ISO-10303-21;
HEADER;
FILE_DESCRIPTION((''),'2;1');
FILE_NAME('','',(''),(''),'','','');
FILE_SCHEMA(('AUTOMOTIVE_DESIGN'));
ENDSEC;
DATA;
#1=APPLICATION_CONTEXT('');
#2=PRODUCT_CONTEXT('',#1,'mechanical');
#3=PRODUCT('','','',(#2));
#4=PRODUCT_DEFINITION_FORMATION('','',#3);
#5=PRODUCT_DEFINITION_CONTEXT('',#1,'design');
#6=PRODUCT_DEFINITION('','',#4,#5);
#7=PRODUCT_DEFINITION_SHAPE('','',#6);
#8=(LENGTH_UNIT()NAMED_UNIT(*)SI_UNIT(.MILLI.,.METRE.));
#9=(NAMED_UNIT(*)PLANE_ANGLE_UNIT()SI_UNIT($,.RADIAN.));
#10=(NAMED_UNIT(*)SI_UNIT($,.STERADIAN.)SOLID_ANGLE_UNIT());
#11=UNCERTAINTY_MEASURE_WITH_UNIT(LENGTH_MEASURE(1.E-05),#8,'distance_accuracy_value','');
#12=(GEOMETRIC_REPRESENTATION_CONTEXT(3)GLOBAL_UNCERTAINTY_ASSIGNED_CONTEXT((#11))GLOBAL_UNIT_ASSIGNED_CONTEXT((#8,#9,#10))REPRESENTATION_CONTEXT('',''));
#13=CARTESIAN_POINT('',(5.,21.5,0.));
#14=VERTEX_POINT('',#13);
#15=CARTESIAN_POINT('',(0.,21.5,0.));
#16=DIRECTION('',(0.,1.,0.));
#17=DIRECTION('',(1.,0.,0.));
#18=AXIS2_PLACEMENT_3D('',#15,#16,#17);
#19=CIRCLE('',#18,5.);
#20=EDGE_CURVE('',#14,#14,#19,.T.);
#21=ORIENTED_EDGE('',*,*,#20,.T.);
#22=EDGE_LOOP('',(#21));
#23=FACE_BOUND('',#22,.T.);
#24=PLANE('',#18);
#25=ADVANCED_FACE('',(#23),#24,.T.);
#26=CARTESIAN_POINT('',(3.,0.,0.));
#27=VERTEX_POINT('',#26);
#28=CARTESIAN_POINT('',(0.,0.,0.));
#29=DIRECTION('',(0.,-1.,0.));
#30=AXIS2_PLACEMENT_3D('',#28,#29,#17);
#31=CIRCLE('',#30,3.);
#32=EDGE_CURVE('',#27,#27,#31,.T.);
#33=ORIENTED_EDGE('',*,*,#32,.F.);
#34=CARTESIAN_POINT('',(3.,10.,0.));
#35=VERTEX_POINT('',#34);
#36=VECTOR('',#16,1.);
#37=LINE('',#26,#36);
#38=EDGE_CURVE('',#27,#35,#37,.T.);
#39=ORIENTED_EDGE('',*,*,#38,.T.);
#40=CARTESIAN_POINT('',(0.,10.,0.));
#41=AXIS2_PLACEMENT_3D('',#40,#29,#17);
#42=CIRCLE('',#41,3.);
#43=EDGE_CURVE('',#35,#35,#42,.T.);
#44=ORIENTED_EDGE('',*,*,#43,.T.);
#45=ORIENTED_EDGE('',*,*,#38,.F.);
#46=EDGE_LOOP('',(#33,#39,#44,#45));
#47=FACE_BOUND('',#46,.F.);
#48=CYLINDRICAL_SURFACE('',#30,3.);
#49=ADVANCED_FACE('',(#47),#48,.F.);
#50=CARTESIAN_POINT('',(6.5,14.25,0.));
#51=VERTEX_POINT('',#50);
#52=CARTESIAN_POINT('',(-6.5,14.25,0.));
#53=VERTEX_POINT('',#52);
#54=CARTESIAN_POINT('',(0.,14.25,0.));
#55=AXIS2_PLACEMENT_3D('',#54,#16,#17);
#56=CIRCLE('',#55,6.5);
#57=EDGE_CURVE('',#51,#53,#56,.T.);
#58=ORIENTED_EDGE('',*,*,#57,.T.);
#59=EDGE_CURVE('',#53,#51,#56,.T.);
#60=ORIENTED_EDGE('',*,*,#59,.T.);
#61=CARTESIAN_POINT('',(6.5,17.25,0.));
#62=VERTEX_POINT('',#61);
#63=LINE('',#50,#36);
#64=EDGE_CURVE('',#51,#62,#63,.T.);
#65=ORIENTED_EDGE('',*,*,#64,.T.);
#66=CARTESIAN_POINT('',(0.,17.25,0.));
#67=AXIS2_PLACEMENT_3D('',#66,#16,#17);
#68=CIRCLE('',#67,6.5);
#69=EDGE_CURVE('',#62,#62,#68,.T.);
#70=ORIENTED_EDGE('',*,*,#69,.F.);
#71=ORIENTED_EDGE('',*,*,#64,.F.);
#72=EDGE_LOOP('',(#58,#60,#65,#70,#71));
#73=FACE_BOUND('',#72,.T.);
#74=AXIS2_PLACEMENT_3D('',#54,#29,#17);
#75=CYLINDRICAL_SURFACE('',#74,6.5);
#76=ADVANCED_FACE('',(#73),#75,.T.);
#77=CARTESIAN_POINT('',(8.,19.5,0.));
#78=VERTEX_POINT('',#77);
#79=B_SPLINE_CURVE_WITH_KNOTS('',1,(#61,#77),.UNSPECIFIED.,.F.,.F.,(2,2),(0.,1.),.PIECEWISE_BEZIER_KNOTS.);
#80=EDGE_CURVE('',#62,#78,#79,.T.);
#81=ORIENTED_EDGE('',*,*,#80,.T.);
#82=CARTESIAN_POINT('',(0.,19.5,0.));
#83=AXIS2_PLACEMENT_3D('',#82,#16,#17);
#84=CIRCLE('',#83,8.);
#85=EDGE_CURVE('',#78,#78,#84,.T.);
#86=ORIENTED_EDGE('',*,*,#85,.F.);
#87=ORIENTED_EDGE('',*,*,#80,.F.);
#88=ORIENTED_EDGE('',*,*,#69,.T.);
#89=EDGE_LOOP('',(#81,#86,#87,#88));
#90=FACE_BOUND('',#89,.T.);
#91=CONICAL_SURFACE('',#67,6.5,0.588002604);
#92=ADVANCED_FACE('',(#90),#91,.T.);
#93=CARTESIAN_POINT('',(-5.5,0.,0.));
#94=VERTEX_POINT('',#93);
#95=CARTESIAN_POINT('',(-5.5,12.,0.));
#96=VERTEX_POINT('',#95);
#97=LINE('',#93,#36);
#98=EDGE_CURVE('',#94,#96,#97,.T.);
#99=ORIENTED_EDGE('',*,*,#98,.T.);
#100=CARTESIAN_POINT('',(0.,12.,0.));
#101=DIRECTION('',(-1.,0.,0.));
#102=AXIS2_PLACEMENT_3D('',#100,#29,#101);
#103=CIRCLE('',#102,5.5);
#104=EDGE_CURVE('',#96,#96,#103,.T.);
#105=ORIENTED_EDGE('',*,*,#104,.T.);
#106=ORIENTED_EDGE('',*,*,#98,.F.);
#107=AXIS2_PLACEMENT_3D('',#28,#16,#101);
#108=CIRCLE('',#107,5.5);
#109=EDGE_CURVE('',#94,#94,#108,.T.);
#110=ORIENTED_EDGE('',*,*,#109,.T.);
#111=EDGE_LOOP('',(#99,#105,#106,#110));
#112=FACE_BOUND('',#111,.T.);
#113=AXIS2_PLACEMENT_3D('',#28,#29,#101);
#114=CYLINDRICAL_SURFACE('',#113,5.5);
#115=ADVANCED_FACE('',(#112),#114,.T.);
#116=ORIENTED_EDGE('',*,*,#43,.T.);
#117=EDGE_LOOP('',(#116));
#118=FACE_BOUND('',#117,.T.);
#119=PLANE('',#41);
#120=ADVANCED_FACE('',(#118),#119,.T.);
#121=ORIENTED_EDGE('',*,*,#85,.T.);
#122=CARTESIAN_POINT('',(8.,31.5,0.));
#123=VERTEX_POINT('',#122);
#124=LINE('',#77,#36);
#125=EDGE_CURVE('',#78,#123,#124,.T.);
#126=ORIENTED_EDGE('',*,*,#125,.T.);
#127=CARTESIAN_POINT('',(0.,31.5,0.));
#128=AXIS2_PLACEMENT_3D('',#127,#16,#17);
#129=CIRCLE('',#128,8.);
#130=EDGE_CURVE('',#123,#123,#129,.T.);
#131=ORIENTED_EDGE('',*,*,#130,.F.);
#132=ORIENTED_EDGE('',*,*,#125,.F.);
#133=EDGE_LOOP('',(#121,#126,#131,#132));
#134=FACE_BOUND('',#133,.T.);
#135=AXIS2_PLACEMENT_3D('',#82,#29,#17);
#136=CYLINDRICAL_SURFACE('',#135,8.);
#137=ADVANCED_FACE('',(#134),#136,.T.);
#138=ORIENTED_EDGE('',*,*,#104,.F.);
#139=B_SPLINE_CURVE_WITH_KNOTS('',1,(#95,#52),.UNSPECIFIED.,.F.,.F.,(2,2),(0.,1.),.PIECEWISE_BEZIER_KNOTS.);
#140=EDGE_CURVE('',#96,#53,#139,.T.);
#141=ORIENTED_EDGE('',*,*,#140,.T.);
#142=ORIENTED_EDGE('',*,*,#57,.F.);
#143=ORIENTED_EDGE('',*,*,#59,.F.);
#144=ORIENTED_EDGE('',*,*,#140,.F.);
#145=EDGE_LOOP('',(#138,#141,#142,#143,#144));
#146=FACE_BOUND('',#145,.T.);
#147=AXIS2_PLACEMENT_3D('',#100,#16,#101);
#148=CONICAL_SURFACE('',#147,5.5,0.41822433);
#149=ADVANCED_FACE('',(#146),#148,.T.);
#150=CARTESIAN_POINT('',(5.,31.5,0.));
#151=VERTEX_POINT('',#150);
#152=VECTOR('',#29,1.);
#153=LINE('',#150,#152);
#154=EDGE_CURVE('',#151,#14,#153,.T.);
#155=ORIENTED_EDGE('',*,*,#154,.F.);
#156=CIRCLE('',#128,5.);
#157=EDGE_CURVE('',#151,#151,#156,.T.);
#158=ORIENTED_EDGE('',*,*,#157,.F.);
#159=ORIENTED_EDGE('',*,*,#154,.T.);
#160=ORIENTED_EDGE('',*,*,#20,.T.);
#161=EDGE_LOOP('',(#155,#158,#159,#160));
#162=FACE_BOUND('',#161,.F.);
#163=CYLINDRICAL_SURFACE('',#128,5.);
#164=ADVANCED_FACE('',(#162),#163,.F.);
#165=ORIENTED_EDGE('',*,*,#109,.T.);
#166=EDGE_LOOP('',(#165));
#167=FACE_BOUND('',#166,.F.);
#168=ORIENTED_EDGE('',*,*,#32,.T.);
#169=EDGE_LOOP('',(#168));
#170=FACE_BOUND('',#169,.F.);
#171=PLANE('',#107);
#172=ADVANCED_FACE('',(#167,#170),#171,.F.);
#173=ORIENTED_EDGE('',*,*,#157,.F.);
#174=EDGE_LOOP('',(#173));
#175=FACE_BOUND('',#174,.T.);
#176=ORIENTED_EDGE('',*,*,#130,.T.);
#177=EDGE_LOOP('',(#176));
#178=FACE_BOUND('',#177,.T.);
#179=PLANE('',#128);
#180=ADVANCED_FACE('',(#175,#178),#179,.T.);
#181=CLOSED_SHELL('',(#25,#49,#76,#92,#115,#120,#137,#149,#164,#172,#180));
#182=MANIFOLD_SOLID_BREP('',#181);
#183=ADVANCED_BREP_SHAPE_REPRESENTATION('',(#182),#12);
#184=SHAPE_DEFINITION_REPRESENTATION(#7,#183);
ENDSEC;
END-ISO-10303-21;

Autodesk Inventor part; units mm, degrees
ref_plane "YZ Plane" through (0, 0, 0) normal (1, 0, 0) x (0, 1, 0)
sketch "Sketch1" plane through (0, 0, 0) normal (0, 1, 0) x (-1, 0, 0)
  circle A0 centre (0, 0) radius 5.5
  dimension "d0" = 11
extrude "Extrusion1" add sketch "Sketch1" along normal blind 12
sketch "Sketch2" plane through (0, 0, 0) normal (0, -1, 0) x (1, 0, 0)
  circle A0 centre (0, 0) radius 3
  dimension "d3" = 6
extrude "Extrusion2" cut sketch "Sketch2" against normal blind 10
ref_plane "Work Plane1" through (0, 14.25, 0) normal (0, 1, 0) x (1, 0, 0)
sketch "Sketch3" plane through (0, 14.25, 0) normal (0, 1, 0) x (1, 0, 0)
  circle A0 centre (0, 0) radius 5.5 projected
  circle A1 centre (0, 0) radius 6.5
  dimension "d7" = 13
extrude "Extrusion3" add sketch "Sketch3" along normal blind 3 contours A0 | A1
loft "Loft1" add section 1 edges at (5.5, 12, 0) section 2 edges at (-6.5, 14.25, 0)
ref_plane "Work Plane2" through (0, 19.5, 0) normal (0, 1, 0) x (1, 0, 0)
sketch "Sketch4" plane through (0, 19.5, 0) normal (0, 1, 0) x (1, 0, 0)
  circle A0 centre (0, 0) radius 3 projected
  circle A1 centre (0, 0) radius 8
  dimension "d15" = 16
extrude "Extrusion4" add sketch "Sketch4" along normal blind 12 contours A0 | A1
loft "Loft2" add section 1 edges at (-6.5, 17.25, 0) section 2 edges at (-8, 19.5, 0)
sketch "Sketch5" plane through (0, 31.5, 0) normal (0, 1, 0) x (1, 0, 0)
  circle A0 centre (0, 0) radius 8 projected
  circle A1 centre (0, 0) radius 5
  dimension "d22" = 10
extrude "Extrusion5" cut sketch "Sketch5" against normal blind 10 contours A1
properties part number "reductor_10_6"
